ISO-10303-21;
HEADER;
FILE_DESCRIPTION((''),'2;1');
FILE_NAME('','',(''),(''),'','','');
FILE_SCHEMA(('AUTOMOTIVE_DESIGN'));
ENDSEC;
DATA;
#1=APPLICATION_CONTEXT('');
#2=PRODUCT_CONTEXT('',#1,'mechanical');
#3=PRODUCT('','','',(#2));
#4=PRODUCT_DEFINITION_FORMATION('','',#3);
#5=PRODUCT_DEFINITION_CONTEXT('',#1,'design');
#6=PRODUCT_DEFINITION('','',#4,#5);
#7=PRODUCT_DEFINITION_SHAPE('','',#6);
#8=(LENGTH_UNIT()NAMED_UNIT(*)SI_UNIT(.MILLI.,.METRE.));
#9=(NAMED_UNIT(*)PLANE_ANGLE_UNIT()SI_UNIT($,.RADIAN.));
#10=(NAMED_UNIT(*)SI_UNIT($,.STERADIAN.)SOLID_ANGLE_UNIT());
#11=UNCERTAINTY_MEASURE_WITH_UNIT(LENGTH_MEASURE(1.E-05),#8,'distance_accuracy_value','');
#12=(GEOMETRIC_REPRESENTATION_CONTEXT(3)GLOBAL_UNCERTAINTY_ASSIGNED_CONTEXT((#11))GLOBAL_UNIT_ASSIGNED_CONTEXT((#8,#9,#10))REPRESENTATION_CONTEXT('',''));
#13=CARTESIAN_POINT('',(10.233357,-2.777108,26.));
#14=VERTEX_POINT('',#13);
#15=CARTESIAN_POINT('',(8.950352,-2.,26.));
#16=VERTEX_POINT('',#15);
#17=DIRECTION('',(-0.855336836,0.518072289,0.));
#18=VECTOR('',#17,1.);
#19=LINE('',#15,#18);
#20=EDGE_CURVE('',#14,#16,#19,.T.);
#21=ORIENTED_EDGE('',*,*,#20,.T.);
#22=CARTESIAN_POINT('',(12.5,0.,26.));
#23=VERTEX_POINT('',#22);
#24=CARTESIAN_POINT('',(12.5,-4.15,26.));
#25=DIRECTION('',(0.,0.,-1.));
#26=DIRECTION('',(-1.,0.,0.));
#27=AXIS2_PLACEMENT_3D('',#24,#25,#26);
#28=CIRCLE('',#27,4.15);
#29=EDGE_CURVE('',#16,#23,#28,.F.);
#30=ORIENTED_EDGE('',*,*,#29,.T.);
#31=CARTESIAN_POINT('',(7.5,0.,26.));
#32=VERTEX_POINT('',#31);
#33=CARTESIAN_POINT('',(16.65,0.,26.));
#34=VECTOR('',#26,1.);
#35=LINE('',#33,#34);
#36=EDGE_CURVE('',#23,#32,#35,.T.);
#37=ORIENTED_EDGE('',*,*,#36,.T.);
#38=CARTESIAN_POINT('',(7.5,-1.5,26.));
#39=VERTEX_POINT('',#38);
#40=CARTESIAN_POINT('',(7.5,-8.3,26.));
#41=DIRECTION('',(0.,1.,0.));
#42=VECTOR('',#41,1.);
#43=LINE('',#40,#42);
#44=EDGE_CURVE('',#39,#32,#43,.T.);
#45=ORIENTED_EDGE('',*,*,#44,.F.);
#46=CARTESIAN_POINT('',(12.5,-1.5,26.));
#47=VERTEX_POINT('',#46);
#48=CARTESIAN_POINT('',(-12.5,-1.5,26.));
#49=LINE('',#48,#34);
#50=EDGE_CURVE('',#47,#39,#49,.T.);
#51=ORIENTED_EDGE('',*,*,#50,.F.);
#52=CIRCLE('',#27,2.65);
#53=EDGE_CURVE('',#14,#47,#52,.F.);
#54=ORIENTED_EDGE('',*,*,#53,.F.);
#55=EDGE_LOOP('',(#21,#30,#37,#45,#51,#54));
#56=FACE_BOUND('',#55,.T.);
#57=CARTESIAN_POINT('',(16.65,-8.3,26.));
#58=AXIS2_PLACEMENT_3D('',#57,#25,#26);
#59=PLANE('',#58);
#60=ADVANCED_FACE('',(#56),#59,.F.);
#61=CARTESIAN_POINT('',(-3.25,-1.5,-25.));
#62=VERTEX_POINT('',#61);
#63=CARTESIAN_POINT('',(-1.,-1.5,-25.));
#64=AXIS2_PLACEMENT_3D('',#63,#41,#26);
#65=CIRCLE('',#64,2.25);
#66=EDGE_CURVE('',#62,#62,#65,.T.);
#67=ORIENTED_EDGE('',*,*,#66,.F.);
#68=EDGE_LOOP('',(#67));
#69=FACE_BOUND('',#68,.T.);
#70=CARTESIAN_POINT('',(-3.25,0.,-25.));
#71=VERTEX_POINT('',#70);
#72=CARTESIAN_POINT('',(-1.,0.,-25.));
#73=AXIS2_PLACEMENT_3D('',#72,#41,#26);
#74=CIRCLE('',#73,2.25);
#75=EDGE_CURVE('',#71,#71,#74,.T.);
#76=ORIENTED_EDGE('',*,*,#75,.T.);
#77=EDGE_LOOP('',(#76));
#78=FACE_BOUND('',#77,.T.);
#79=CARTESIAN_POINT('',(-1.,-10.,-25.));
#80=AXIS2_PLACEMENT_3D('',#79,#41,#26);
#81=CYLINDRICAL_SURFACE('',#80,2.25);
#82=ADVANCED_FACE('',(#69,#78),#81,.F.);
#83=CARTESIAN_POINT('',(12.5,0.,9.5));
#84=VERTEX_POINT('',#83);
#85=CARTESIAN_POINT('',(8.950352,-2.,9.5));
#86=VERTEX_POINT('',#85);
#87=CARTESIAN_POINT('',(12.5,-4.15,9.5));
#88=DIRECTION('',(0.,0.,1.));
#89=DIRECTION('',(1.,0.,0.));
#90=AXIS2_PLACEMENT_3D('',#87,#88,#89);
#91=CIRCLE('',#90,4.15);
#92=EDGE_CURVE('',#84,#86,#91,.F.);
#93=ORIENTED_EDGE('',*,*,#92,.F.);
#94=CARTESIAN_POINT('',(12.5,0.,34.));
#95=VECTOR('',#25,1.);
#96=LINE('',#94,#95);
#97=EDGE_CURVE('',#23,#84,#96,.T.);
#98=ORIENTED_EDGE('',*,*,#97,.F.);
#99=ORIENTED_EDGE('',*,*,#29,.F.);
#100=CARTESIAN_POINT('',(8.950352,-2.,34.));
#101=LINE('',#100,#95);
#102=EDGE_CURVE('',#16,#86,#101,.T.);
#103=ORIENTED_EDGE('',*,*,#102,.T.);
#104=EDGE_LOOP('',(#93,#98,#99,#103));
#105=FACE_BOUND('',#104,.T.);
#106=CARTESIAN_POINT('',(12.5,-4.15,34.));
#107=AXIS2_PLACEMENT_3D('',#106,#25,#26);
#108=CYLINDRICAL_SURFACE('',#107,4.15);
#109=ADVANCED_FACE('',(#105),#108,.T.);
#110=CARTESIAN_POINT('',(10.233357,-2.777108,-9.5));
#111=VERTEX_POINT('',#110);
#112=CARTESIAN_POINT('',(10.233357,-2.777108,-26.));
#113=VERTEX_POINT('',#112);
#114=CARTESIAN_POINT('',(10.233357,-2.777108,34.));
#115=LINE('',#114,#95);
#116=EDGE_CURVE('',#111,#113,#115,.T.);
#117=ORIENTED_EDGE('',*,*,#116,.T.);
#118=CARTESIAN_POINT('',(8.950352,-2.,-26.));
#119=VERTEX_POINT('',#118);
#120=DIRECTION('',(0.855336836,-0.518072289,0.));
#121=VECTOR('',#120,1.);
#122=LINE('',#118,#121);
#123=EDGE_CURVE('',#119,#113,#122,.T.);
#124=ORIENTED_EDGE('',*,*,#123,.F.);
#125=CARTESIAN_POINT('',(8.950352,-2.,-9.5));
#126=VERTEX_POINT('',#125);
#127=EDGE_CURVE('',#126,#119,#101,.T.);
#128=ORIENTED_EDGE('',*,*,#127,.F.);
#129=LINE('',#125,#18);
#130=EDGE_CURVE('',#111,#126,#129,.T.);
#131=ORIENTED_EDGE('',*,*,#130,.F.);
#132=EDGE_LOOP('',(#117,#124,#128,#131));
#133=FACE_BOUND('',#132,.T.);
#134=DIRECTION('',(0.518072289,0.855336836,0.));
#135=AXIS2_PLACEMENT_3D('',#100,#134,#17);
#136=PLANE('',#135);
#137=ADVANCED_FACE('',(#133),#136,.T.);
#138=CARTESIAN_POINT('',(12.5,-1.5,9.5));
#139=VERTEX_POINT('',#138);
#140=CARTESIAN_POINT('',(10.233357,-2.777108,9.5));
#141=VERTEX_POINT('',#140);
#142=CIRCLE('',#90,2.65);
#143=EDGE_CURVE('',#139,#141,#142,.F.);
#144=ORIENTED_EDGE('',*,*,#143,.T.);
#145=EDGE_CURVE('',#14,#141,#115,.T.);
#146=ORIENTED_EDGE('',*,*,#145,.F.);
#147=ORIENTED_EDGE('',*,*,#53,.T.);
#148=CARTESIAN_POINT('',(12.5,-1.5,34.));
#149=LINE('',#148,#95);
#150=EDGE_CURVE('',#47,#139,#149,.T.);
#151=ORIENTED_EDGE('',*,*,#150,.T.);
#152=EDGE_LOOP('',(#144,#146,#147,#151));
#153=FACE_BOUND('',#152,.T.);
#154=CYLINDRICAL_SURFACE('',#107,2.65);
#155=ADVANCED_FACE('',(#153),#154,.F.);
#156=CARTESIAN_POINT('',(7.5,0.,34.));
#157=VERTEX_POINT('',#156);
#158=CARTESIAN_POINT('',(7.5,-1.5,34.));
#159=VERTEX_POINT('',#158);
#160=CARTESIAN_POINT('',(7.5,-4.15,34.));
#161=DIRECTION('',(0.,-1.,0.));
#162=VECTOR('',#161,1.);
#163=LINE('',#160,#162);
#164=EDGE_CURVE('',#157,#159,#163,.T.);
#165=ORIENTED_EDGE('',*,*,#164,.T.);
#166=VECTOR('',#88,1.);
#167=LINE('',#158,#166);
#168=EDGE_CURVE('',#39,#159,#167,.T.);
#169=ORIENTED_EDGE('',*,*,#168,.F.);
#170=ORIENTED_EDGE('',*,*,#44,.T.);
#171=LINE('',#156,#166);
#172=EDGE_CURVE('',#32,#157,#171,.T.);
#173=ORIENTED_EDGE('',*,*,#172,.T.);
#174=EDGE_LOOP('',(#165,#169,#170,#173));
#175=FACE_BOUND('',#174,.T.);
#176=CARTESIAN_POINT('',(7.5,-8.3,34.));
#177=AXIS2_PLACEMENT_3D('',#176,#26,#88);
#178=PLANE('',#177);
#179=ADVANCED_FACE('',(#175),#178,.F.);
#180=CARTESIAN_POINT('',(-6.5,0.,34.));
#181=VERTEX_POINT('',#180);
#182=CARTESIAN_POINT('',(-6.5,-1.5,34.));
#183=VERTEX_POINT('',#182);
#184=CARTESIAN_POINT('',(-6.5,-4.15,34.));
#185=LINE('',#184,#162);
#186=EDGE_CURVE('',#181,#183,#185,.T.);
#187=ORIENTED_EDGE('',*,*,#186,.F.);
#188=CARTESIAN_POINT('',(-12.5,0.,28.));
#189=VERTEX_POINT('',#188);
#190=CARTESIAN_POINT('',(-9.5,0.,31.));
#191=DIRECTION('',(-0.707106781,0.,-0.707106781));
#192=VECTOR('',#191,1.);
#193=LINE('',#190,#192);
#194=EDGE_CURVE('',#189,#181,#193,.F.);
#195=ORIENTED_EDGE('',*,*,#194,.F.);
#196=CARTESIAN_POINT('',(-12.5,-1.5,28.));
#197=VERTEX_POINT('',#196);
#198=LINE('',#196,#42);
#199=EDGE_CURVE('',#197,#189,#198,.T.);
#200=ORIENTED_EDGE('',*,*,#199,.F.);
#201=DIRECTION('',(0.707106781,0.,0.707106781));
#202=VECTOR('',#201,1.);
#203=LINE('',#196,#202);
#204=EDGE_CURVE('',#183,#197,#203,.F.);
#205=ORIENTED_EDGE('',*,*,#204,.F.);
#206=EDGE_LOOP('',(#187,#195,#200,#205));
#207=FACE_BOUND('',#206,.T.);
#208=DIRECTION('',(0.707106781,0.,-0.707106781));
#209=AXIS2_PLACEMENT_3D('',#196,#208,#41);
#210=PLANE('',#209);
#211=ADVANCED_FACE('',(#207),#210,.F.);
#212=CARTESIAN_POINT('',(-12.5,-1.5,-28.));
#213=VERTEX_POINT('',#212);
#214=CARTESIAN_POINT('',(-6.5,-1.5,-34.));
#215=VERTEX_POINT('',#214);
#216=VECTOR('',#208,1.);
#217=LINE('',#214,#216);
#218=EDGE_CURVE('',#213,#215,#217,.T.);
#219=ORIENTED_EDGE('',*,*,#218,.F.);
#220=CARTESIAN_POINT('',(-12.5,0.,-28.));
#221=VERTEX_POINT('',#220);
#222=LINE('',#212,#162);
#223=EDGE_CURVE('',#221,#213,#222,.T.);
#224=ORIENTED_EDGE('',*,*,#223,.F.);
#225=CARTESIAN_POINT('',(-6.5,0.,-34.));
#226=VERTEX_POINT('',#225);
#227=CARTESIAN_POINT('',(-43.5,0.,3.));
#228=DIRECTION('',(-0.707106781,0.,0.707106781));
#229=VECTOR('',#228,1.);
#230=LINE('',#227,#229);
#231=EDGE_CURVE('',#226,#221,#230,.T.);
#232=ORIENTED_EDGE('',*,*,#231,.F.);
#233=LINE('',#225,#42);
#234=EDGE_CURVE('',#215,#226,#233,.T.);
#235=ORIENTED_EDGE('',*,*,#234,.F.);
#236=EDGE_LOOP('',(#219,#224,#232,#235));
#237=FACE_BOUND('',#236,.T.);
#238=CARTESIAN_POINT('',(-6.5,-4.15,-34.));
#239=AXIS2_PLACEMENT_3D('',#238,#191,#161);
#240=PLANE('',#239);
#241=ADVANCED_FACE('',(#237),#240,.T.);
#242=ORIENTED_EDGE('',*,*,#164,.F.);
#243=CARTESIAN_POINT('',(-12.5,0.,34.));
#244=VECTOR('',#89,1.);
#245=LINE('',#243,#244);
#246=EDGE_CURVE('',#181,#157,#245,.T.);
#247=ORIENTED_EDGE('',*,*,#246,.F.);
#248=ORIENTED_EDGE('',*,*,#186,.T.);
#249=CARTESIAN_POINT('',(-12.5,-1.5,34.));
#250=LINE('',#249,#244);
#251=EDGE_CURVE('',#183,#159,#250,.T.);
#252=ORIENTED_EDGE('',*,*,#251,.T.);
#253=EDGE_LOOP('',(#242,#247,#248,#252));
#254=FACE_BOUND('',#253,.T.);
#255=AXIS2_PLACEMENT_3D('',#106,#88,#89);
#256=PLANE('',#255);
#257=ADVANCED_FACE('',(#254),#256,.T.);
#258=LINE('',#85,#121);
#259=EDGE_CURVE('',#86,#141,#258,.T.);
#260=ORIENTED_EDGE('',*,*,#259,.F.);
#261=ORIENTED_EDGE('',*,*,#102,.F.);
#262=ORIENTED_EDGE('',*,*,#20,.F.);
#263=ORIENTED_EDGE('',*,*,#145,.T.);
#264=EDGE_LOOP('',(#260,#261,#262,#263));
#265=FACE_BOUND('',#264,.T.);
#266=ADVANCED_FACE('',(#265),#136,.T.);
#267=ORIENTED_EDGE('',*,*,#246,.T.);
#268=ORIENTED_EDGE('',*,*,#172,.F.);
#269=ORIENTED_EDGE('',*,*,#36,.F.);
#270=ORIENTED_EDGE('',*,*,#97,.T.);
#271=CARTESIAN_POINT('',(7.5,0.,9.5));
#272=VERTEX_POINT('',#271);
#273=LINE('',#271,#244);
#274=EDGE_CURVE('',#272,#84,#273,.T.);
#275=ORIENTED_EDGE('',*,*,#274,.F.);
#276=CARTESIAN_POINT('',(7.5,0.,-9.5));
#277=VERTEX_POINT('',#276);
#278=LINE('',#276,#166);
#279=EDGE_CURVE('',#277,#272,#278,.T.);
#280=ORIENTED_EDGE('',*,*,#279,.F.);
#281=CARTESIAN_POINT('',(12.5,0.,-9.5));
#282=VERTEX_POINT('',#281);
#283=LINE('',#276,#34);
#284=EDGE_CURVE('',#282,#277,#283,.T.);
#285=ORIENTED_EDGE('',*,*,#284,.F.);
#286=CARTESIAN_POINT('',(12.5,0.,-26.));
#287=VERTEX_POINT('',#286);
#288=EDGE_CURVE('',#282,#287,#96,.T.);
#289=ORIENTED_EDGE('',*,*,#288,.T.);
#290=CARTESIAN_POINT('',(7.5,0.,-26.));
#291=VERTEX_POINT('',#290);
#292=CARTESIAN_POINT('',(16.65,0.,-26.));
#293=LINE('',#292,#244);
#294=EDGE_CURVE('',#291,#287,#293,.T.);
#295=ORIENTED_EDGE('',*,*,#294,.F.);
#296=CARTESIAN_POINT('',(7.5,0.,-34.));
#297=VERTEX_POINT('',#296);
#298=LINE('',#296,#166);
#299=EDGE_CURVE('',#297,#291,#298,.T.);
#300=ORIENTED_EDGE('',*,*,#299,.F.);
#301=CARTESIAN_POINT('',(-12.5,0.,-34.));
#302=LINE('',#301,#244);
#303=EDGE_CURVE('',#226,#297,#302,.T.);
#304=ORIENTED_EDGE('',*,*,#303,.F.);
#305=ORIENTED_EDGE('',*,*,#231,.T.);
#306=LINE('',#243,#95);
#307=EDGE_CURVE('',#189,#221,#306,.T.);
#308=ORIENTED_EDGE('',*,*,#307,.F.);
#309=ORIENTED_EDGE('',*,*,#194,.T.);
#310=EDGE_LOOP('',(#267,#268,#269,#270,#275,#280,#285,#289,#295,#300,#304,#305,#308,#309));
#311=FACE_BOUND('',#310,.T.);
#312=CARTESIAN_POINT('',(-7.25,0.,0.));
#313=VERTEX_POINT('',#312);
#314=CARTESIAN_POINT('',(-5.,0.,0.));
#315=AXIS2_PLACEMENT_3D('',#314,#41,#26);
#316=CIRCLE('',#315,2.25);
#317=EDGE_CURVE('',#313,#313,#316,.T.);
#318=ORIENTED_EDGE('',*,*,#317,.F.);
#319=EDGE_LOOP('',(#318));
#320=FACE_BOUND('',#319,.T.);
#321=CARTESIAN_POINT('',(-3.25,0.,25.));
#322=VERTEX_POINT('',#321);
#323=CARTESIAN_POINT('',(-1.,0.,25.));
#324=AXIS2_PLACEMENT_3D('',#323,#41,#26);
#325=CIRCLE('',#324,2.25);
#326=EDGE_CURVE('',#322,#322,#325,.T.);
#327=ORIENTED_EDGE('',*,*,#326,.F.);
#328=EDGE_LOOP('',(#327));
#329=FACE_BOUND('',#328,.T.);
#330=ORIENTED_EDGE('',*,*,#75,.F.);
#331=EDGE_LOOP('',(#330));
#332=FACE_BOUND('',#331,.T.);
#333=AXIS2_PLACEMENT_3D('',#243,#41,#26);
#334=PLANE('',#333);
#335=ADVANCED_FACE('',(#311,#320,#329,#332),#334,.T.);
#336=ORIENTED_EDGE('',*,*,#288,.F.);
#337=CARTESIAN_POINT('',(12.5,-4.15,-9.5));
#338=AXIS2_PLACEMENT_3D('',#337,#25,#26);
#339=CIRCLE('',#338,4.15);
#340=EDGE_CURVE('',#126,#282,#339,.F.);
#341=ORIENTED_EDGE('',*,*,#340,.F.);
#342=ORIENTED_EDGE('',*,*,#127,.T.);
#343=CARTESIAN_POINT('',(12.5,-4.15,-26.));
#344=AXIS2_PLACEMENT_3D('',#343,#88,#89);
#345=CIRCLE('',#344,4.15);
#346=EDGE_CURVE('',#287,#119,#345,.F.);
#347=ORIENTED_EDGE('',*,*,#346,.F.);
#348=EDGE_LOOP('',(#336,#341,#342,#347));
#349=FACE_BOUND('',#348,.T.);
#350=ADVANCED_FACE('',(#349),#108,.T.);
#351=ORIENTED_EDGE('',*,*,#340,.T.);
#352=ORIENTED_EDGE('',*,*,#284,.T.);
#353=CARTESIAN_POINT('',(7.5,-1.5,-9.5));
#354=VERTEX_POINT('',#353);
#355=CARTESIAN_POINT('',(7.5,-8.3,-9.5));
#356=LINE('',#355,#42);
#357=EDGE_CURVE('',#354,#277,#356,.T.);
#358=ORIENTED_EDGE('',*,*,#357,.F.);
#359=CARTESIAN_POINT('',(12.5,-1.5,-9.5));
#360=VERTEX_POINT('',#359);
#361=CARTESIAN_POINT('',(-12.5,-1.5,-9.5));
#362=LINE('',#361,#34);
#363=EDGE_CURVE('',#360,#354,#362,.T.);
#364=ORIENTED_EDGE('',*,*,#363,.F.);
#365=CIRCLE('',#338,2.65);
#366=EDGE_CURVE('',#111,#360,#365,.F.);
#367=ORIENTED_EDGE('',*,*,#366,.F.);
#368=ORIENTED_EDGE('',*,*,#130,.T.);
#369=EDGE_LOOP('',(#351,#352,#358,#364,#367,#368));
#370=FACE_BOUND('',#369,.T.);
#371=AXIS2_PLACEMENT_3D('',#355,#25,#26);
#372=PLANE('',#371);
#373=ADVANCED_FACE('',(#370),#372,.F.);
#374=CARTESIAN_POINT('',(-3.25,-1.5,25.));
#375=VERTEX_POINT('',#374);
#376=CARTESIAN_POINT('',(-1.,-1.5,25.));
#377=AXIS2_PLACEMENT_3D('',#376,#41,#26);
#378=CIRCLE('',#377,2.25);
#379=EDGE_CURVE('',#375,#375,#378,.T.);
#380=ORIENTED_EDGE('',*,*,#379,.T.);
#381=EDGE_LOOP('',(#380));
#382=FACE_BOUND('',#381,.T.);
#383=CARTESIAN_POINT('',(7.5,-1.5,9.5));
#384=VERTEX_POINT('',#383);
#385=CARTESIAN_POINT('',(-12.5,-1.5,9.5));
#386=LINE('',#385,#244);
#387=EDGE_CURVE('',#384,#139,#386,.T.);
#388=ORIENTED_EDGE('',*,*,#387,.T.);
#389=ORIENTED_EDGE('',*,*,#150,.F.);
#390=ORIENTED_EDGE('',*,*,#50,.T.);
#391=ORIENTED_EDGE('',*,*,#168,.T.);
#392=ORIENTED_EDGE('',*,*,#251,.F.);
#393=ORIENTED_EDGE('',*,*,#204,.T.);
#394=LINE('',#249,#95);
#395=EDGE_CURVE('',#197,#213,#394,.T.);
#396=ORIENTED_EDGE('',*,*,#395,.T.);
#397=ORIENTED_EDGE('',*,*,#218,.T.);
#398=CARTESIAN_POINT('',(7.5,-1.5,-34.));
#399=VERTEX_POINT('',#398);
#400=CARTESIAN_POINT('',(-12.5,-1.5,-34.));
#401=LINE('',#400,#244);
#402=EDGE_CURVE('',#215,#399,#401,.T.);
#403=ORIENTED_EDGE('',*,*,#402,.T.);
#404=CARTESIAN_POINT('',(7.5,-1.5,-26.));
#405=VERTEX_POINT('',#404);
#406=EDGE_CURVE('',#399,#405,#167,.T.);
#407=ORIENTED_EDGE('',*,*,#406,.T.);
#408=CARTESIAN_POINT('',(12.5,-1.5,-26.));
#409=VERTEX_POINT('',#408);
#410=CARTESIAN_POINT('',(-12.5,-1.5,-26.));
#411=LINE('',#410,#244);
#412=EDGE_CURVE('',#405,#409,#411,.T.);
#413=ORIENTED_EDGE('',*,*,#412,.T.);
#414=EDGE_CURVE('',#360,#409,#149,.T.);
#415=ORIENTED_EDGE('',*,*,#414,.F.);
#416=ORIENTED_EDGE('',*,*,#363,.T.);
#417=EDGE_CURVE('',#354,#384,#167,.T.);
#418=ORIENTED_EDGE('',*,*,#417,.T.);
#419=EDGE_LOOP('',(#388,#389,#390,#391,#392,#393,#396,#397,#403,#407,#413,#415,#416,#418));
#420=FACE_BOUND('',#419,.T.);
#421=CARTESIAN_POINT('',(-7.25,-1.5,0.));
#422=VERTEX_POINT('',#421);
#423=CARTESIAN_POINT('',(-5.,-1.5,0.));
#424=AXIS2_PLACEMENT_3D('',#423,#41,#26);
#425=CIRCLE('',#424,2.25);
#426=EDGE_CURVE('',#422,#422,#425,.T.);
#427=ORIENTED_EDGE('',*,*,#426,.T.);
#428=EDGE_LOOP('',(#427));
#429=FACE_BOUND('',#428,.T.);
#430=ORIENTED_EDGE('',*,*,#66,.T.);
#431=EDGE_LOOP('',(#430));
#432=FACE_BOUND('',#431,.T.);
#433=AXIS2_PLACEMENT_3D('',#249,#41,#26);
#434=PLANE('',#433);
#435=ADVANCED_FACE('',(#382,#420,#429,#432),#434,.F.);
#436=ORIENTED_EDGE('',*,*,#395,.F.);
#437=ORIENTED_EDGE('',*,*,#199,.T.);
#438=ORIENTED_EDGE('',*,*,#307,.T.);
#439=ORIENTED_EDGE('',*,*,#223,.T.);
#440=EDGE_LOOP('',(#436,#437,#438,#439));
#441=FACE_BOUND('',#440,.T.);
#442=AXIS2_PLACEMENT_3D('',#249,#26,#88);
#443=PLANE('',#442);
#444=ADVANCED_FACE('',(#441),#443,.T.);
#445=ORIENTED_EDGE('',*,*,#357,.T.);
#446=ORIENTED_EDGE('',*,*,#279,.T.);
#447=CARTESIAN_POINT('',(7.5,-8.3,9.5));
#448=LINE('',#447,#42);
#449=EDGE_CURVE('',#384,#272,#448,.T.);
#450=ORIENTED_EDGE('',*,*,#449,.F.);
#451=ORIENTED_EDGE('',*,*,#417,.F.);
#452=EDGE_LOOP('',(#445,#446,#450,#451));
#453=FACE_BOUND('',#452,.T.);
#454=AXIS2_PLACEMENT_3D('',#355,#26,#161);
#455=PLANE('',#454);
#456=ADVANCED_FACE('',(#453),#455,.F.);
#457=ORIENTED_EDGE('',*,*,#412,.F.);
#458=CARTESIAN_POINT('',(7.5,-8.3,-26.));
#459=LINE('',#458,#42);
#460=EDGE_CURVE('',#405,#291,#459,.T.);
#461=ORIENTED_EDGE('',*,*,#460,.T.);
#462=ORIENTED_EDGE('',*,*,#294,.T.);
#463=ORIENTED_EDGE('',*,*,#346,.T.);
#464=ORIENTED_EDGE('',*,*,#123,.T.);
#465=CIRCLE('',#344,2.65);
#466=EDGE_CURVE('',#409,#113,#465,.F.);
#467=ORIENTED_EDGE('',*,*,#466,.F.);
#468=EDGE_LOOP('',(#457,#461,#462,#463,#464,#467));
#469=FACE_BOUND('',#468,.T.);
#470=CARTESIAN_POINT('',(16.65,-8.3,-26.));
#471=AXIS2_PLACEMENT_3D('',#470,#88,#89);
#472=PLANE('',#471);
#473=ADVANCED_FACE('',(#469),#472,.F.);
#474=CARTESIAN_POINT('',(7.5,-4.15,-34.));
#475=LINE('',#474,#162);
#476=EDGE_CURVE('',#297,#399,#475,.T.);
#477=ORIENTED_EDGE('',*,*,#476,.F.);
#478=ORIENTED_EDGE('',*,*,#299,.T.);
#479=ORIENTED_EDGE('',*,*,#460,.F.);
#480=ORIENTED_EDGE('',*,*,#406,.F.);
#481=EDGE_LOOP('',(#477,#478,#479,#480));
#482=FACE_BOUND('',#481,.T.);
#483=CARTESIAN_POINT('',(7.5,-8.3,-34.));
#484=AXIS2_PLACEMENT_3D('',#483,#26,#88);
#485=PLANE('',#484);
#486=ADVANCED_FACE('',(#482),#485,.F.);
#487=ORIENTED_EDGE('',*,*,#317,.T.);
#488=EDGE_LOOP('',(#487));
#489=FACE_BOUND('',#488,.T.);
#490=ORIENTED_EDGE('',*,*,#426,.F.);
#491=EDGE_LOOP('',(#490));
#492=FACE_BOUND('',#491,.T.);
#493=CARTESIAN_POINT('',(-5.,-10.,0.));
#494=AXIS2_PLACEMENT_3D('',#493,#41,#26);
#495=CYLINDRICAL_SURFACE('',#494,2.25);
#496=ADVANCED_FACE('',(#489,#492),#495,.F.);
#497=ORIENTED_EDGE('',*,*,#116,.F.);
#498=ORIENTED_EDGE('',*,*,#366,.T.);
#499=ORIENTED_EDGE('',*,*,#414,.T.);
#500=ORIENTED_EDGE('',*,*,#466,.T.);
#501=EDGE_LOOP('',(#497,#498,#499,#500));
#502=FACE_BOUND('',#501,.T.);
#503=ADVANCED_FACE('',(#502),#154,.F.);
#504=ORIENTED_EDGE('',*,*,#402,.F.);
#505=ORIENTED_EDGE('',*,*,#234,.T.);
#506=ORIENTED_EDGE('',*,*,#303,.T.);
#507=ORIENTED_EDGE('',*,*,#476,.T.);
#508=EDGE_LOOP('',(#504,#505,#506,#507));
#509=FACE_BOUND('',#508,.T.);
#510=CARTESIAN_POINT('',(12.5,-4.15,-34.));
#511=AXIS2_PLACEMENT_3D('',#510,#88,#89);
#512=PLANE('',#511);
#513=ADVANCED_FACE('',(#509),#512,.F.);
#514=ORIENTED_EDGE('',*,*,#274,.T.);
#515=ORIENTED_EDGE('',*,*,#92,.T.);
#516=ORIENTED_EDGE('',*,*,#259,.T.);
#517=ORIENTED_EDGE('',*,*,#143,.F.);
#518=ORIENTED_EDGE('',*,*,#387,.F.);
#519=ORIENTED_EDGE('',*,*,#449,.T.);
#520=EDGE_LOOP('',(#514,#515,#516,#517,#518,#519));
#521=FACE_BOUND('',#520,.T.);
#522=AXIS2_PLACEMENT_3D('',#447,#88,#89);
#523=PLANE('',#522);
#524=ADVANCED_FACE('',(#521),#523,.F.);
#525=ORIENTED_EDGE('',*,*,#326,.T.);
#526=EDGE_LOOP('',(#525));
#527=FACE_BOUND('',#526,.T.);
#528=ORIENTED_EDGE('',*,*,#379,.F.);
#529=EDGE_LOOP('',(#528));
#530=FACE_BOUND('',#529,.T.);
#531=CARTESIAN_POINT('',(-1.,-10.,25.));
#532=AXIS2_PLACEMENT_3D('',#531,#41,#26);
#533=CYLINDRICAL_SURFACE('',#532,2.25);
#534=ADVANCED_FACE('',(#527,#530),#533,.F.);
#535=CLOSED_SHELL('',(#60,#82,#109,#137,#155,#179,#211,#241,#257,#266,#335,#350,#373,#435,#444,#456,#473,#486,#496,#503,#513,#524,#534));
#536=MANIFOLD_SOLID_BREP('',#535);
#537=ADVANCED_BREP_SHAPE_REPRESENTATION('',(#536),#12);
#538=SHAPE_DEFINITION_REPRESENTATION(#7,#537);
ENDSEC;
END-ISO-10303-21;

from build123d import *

# Parameters (mm, degrees)
TABAN_FLAN_1_DEPTH    = 34
IZIM9_W               = 9.15
IZIM9_H               = 8
IZIM9_H_2             = 19
KES_EKSTR_ZYON1_DEPTH = 39.757096124
IZIM11_R              = 2.25
KES_EKSTR_ZYON2_DEPTH = 10
RADYUS1_SIZE          = 6


# Sheet-metal steps are written as plain solids
with BuildPart() as part:
    # Çizim1 → Taban-Flanş1 (new, symmetric)
    with BuildSketch(Plane.XY):
        with BuildLine():
            Line((-12.5, 0), (12.5, 0))
            ThreePointArc((12.5, 0), (14.537154879, -7.765591238), (8.95035213, -2))
            Line((8.95035213, -2), (10.233357384, -2.777108434))
            ThreePointArc((10.233357384, -2.777108434), (13.800833838, -6.458751031), (12.5, -1.5))
            Line((12.5, -1.5), (-12.5, -1.5))
            Line((-12.5, -1.5), (-12.5, 0))
        make_face()
    extrude(amount=TABAN_FLAN_1_DEPTH, both=True)

    # Çizim9 → Kes-Ekstrüzyon1 (cut, through all)
    with BuildSketch(Plane(origin=(0, 0, 0), x_dir=(1, 0, 0), z_dir=(0, 1, 0))):
        with Locations((12.075, 30)):
            Rectangle(IZIM9_W, IZIM9_H)
        with Locations((12.075, -30)):
            Rectangle(IZIM9_W, IZIM9_H)
        with Locations((12.075, 0)):
            Rectangle(IZIM9_W, IZIM9_H_2)
    extrude(amount=-KES_EKSTR_ZYON1_DEPTH, mode=Mode.SUBTRACT)

    # Çizim11 → Kes-Ekstrüzyon2 (cut)
    with BuildSketch(Plane(origin=(0, 0, 0), x_dir=(1, 0, 0), z_dir=(0, 1, 0))):
        with Locations(Location((-1, 25, 0), (0, 0, 180))):
            Circle(IZIM11_R)
        with Locations(Location((-1, -25, 0), (0, 0, 180))):
            Circle(IZIM11_R)
        with Locations(Location((-5, 0, 0), (0, 0, 180))):
            Circle(IZIM11_R)
    extrude(amount=-KES_EKSTR_ZYON2_DEPTH, mode=Mode.SUBTRACT)

    # Radyus1
    radyus1_edges = [part.edges().sort_by_distance(p)[0] for p in [
        (-12.5, -0.75, 34),
        (-12.5, -0.75, -34),
    ]]
    chamfer(radyus1_edges, length=RADYUS1_SIZE)


solid = part.part
